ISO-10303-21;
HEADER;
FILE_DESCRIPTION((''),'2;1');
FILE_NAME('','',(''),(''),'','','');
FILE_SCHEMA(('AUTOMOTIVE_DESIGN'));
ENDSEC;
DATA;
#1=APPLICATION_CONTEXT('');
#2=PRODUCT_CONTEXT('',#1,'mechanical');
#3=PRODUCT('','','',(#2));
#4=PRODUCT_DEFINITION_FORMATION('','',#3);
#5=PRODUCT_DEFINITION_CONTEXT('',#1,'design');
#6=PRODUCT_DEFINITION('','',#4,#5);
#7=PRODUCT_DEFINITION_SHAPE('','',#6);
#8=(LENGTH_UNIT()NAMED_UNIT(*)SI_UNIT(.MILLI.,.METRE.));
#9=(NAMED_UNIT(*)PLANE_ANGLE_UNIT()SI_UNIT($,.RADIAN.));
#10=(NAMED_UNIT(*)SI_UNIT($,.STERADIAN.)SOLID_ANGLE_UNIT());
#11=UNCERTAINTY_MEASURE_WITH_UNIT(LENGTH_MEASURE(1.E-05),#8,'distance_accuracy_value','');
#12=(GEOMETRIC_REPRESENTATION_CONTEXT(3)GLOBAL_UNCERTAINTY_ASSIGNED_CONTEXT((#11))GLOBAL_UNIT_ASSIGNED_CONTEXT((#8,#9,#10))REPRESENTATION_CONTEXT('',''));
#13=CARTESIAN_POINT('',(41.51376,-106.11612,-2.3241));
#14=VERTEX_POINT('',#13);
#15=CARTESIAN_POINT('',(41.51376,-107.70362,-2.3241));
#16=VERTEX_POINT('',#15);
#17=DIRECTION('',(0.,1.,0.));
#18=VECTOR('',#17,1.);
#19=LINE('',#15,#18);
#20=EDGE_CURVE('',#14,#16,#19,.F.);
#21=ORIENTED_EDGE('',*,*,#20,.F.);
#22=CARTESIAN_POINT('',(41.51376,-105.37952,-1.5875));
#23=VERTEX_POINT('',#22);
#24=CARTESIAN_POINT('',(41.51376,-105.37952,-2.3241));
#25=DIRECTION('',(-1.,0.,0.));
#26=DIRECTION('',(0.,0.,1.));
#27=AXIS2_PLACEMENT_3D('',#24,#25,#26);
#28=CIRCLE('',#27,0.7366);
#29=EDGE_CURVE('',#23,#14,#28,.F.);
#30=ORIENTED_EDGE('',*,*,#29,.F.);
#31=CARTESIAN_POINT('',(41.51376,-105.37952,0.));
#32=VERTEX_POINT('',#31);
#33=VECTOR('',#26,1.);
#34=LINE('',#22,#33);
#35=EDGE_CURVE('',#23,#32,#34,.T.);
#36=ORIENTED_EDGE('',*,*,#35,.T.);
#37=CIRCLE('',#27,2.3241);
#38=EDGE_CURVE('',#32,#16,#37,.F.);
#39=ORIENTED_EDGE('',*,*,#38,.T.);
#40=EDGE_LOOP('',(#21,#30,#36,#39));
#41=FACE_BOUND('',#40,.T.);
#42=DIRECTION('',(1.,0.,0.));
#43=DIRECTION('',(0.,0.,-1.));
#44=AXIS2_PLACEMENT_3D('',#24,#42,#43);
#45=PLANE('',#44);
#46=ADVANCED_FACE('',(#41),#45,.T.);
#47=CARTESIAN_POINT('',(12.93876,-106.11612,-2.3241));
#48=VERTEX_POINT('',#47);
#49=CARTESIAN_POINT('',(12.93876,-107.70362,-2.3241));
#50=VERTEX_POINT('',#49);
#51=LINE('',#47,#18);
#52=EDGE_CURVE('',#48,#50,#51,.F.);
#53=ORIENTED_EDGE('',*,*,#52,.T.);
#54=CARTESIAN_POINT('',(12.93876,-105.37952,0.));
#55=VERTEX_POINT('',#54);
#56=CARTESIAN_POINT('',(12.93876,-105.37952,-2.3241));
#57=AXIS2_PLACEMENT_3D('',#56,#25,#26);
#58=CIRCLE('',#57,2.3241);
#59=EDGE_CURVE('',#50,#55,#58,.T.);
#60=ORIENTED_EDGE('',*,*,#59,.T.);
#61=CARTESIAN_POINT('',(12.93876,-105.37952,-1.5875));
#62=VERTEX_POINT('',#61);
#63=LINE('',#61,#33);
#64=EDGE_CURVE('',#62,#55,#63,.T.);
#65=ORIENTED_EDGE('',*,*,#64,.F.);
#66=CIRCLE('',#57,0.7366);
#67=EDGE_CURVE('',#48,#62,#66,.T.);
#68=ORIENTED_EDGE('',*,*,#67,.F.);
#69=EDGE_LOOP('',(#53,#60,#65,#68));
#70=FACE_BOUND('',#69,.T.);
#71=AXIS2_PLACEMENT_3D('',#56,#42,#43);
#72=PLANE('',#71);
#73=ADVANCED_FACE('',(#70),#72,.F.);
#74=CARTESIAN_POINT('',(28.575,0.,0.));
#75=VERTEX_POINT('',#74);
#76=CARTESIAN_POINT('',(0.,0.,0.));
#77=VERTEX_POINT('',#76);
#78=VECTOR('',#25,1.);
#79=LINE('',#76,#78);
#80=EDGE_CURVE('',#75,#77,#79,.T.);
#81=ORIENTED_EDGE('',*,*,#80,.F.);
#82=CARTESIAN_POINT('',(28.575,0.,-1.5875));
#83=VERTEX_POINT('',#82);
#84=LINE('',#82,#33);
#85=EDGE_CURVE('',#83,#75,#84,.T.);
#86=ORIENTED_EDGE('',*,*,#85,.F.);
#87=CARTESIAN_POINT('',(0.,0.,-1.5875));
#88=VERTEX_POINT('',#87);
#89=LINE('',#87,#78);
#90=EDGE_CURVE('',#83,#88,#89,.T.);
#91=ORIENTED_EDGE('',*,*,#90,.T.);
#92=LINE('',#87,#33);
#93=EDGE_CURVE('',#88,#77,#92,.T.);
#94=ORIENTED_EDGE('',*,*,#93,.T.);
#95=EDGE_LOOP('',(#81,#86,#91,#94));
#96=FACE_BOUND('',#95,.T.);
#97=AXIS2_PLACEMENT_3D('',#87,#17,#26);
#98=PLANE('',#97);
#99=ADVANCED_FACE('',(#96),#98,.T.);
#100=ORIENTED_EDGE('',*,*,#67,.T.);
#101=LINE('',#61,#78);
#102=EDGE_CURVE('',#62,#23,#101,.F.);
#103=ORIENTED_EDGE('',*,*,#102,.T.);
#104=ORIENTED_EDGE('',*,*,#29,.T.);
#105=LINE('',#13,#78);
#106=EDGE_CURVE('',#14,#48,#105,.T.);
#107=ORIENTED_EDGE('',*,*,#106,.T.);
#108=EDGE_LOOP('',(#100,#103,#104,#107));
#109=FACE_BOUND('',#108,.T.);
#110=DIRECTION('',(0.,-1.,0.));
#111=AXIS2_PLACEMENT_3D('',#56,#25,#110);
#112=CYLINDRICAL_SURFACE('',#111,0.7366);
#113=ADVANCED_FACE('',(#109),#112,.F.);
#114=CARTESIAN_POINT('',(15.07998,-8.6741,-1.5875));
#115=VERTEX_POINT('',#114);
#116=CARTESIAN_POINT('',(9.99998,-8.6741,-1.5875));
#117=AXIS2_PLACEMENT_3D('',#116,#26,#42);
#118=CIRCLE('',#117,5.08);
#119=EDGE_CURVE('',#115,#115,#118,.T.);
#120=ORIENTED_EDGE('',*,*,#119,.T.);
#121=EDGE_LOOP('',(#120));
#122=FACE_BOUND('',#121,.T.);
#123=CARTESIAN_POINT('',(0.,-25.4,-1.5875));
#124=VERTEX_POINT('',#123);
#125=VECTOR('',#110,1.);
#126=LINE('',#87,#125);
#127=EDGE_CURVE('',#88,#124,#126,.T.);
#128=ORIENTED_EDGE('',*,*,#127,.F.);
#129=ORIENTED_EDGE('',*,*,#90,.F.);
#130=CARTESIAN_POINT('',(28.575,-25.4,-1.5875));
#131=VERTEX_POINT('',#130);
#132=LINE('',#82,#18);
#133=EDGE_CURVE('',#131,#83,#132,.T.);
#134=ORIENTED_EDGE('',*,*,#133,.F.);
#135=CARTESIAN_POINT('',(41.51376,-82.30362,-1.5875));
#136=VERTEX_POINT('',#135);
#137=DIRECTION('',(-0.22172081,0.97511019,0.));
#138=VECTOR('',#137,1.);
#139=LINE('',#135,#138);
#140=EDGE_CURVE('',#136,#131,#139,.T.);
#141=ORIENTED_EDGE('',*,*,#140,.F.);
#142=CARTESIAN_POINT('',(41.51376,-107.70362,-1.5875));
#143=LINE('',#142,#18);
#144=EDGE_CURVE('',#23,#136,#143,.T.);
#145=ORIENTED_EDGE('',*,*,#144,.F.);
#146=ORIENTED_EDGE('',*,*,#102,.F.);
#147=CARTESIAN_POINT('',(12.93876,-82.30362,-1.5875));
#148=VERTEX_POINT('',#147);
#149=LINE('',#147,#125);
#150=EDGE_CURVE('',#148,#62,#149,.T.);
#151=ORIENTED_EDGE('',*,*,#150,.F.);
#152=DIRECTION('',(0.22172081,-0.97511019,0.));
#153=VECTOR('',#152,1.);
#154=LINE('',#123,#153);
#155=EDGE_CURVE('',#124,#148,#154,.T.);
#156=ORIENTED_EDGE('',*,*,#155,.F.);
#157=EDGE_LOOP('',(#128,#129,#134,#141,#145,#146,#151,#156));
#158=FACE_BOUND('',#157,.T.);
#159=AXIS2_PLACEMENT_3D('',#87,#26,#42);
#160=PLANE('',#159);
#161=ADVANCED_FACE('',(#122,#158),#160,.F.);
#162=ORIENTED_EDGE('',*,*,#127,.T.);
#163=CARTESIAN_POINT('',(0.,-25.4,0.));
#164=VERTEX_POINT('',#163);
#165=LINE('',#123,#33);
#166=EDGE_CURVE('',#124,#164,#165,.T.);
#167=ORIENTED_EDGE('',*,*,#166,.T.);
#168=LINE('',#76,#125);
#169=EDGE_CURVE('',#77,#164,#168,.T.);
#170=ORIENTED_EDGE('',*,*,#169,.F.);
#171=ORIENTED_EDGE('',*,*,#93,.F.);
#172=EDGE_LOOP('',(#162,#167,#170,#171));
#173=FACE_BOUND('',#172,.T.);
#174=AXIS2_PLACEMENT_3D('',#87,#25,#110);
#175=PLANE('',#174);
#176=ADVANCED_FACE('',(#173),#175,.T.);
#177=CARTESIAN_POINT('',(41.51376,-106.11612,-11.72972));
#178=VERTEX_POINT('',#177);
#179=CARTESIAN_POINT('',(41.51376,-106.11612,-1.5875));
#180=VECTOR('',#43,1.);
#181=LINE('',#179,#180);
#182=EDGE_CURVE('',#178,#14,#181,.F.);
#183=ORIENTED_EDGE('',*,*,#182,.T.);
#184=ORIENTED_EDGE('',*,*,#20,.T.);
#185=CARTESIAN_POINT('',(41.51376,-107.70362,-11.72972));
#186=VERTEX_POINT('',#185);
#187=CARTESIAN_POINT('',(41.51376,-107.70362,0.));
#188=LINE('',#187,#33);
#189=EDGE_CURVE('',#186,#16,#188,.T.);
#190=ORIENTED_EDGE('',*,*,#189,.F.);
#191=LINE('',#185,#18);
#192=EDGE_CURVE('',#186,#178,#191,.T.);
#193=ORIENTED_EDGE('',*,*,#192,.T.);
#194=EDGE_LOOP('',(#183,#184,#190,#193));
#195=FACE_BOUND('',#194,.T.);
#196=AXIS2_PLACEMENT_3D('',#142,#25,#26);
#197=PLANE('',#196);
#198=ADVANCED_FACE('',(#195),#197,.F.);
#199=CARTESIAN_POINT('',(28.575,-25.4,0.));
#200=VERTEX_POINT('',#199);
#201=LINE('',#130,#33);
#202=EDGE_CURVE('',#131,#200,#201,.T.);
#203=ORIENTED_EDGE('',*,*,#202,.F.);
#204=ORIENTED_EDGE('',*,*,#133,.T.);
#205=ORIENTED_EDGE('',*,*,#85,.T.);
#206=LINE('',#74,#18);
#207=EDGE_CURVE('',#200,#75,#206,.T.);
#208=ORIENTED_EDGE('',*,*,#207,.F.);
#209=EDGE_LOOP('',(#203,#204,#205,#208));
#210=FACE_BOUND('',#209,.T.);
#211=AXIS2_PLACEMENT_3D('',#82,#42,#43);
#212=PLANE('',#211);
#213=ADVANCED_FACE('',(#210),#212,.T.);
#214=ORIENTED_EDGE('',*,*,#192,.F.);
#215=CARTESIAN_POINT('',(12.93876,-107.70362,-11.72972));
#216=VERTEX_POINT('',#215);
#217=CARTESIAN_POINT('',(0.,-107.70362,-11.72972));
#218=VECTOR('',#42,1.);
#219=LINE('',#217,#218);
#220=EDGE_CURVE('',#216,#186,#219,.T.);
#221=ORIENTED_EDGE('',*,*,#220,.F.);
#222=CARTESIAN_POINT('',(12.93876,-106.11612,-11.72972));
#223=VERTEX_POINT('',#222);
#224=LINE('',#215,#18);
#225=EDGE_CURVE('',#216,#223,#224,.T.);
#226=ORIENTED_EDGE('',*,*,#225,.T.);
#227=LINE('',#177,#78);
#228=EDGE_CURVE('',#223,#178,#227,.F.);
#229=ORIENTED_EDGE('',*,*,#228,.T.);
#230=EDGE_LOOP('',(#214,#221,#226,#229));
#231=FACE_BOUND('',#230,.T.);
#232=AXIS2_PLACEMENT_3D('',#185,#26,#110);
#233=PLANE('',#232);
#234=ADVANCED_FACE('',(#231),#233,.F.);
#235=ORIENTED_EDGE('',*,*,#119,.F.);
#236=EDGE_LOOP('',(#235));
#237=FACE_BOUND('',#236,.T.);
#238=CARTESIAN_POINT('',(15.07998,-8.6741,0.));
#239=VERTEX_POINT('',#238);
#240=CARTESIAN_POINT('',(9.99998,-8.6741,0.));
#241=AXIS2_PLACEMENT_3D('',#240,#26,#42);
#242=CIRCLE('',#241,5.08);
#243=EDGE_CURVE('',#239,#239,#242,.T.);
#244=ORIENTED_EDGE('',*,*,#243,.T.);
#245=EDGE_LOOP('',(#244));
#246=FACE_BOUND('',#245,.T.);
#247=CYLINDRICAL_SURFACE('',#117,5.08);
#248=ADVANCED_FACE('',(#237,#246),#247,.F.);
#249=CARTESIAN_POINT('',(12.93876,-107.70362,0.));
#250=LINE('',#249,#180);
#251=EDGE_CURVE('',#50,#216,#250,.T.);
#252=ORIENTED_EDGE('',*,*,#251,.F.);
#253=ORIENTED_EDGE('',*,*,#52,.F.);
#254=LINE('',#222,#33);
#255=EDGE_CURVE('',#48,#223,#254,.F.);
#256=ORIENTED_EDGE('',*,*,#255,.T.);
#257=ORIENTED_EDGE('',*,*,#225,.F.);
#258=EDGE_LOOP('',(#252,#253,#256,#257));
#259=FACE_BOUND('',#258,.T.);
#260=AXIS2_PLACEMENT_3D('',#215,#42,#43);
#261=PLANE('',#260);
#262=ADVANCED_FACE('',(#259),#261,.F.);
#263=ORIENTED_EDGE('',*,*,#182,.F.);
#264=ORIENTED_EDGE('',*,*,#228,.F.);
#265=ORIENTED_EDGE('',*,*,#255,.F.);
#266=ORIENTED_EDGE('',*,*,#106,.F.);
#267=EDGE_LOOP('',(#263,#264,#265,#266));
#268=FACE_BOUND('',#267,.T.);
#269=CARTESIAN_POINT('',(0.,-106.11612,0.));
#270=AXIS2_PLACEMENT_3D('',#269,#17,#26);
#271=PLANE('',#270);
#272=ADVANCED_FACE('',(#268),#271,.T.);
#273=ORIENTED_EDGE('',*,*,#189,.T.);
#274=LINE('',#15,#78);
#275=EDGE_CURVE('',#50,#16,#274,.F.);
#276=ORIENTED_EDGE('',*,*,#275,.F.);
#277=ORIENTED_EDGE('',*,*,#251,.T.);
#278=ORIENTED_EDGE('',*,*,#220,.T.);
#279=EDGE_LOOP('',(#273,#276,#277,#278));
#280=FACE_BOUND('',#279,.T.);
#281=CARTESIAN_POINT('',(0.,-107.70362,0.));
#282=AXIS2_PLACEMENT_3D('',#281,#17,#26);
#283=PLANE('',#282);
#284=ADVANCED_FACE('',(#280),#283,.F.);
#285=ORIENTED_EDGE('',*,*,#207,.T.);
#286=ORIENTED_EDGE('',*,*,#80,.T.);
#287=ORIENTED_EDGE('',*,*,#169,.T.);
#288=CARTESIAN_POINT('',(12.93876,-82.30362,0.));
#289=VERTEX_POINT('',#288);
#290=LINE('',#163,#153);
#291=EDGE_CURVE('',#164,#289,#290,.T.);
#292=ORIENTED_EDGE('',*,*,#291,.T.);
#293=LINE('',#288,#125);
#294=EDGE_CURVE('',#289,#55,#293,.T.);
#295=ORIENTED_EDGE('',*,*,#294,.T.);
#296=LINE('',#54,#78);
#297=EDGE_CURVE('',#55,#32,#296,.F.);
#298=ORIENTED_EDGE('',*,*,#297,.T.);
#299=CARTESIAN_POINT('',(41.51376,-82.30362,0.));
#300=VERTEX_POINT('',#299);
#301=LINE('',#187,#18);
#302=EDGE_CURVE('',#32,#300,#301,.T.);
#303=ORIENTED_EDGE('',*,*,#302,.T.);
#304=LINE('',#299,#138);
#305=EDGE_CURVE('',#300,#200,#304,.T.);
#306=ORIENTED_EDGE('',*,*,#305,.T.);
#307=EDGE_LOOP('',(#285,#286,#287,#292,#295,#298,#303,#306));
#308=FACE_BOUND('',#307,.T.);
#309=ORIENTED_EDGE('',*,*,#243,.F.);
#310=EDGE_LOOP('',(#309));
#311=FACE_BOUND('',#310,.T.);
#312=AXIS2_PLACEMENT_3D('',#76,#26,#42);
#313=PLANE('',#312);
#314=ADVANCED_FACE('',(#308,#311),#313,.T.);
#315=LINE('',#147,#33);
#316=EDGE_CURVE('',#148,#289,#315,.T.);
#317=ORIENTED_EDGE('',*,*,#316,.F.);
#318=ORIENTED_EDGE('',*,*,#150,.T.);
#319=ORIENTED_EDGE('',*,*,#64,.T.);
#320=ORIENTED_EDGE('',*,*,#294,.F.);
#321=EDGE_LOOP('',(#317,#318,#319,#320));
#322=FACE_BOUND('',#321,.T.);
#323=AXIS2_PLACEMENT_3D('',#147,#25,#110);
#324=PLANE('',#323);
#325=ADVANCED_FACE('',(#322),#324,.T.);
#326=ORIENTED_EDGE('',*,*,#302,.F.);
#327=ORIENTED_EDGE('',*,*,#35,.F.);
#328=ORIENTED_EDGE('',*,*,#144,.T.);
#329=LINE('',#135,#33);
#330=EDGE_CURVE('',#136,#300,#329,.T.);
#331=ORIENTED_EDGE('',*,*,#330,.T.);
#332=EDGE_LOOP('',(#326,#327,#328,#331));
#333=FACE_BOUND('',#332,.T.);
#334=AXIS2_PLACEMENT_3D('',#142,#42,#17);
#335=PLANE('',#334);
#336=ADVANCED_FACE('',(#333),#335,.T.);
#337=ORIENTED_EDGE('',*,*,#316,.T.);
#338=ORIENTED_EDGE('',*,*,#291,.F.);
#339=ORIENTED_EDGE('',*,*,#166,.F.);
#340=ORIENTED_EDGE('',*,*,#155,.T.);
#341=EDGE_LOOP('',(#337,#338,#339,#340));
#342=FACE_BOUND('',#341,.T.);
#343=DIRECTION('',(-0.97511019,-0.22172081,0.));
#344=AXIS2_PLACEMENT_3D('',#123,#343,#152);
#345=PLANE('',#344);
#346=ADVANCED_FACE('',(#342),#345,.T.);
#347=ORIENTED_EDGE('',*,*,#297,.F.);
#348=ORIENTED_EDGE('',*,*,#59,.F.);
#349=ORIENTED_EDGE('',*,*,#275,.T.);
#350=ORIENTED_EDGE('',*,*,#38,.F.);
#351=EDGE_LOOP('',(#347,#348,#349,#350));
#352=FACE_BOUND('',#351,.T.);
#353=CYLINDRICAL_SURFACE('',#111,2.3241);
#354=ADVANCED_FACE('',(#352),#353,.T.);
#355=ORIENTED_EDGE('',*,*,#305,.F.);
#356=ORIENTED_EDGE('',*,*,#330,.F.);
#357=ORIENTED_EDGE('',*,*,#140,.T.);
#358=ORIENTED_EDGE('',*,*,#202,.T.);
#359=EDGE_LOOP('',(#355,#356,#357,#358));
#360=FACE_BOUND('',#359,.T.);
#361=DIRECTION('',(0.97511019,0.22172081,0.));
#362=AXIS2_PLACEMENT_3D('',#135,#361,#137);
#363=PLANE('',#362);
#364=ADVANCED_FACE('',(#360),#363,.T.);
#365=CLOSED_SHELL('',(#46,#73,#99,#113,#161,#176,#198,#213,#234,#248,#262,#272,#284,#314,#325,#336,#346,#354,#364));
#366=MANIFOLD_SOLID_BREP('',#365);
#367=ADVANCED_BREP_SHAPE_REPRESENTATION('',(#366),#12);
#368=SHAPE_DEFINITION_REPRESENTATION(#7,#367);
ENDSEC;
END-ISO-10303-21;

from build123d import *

# Parameters (mm, degrees)
SKETCH1_R                    = 5.08
BASE_FLANGE1_DEPTH           = 1.5875
EDGE_FLANGE1_STRIP_W         = 7.8232
EDGE_FLANGE1_STRIP_H         = 1.5875
EDGE_FLANGE1_STRIP_CUT_DEPTH = 28.575
EDGE_FLANGE1_DEPTH           = 28.575


# Sheet-metal steps are written as plain solids
with BuildPart() as part:
    # Sketch1 → Base-Flange1 (new body)
    with BuildSketch(Plane.XY):
        Polygon((0, -25.4), (12.93876, -82.30362), (12.93876, -107.70362), (41.51376, -107.70362), (41.51376, -82.30362), (28.575, -25.4), (28.575, 0), (0, 0), align=None)
        with Locations((9.99998, -8.6741)):
            Circle(SKETCH1_R, mode=Mode.SUBTRACT)
    extrude(amount=-BASE_FLANGE1_DEPTH)

    # Edge-Flange1 strip (across the edge) → Edge-Flange1 strip cut (cut)
    with BuildSketch(Plane(origin=(41.51376, -107.70362, -1.5875), x_dir=(0, 1, 0), z_dir=(-1, 0, 0))):
        with Locations((-1.5875, -0.79375)):
            Rectangle(EDGE_FLANGE1_STRIP_W, EDGE_FLANGE1_STRIP_H)
    extrude(amount=EDGE_FLANGE1_STRIP_CUT_DEPTH, mode=Mode.SUBTRACT)

    # Edge-Flange1 section (across the edge) → Edge-Flange1 (add)
    with BuildSketch(Plane(origin=(41.51376, -107.70362, -1.5875), x_dir=(0, 1, 0), z_dir=(-1, 0, 0))):
        with BuildLine():
            Line((0, 0.7366), (0, 10.14222))
            Line((0, 10.14222), (1.5875, 10.14222))
            Line((1.5875, 10.14222), (1.5875, 0.7366))
            ThreePointArc((1.5875, 0.7366), (1.803245145, 0.215745145), (2.3241, 0))
            Line((2.3241, 0), (2.3241, -1.5875))
            ThreePointArc((2.3241, -1.5875), (0.68071313, -0.90678687), (0, 0.7366))
        make_face()
    extrude(amount=EDGE_FLANGE1_DEPTH)


solid = part.part
